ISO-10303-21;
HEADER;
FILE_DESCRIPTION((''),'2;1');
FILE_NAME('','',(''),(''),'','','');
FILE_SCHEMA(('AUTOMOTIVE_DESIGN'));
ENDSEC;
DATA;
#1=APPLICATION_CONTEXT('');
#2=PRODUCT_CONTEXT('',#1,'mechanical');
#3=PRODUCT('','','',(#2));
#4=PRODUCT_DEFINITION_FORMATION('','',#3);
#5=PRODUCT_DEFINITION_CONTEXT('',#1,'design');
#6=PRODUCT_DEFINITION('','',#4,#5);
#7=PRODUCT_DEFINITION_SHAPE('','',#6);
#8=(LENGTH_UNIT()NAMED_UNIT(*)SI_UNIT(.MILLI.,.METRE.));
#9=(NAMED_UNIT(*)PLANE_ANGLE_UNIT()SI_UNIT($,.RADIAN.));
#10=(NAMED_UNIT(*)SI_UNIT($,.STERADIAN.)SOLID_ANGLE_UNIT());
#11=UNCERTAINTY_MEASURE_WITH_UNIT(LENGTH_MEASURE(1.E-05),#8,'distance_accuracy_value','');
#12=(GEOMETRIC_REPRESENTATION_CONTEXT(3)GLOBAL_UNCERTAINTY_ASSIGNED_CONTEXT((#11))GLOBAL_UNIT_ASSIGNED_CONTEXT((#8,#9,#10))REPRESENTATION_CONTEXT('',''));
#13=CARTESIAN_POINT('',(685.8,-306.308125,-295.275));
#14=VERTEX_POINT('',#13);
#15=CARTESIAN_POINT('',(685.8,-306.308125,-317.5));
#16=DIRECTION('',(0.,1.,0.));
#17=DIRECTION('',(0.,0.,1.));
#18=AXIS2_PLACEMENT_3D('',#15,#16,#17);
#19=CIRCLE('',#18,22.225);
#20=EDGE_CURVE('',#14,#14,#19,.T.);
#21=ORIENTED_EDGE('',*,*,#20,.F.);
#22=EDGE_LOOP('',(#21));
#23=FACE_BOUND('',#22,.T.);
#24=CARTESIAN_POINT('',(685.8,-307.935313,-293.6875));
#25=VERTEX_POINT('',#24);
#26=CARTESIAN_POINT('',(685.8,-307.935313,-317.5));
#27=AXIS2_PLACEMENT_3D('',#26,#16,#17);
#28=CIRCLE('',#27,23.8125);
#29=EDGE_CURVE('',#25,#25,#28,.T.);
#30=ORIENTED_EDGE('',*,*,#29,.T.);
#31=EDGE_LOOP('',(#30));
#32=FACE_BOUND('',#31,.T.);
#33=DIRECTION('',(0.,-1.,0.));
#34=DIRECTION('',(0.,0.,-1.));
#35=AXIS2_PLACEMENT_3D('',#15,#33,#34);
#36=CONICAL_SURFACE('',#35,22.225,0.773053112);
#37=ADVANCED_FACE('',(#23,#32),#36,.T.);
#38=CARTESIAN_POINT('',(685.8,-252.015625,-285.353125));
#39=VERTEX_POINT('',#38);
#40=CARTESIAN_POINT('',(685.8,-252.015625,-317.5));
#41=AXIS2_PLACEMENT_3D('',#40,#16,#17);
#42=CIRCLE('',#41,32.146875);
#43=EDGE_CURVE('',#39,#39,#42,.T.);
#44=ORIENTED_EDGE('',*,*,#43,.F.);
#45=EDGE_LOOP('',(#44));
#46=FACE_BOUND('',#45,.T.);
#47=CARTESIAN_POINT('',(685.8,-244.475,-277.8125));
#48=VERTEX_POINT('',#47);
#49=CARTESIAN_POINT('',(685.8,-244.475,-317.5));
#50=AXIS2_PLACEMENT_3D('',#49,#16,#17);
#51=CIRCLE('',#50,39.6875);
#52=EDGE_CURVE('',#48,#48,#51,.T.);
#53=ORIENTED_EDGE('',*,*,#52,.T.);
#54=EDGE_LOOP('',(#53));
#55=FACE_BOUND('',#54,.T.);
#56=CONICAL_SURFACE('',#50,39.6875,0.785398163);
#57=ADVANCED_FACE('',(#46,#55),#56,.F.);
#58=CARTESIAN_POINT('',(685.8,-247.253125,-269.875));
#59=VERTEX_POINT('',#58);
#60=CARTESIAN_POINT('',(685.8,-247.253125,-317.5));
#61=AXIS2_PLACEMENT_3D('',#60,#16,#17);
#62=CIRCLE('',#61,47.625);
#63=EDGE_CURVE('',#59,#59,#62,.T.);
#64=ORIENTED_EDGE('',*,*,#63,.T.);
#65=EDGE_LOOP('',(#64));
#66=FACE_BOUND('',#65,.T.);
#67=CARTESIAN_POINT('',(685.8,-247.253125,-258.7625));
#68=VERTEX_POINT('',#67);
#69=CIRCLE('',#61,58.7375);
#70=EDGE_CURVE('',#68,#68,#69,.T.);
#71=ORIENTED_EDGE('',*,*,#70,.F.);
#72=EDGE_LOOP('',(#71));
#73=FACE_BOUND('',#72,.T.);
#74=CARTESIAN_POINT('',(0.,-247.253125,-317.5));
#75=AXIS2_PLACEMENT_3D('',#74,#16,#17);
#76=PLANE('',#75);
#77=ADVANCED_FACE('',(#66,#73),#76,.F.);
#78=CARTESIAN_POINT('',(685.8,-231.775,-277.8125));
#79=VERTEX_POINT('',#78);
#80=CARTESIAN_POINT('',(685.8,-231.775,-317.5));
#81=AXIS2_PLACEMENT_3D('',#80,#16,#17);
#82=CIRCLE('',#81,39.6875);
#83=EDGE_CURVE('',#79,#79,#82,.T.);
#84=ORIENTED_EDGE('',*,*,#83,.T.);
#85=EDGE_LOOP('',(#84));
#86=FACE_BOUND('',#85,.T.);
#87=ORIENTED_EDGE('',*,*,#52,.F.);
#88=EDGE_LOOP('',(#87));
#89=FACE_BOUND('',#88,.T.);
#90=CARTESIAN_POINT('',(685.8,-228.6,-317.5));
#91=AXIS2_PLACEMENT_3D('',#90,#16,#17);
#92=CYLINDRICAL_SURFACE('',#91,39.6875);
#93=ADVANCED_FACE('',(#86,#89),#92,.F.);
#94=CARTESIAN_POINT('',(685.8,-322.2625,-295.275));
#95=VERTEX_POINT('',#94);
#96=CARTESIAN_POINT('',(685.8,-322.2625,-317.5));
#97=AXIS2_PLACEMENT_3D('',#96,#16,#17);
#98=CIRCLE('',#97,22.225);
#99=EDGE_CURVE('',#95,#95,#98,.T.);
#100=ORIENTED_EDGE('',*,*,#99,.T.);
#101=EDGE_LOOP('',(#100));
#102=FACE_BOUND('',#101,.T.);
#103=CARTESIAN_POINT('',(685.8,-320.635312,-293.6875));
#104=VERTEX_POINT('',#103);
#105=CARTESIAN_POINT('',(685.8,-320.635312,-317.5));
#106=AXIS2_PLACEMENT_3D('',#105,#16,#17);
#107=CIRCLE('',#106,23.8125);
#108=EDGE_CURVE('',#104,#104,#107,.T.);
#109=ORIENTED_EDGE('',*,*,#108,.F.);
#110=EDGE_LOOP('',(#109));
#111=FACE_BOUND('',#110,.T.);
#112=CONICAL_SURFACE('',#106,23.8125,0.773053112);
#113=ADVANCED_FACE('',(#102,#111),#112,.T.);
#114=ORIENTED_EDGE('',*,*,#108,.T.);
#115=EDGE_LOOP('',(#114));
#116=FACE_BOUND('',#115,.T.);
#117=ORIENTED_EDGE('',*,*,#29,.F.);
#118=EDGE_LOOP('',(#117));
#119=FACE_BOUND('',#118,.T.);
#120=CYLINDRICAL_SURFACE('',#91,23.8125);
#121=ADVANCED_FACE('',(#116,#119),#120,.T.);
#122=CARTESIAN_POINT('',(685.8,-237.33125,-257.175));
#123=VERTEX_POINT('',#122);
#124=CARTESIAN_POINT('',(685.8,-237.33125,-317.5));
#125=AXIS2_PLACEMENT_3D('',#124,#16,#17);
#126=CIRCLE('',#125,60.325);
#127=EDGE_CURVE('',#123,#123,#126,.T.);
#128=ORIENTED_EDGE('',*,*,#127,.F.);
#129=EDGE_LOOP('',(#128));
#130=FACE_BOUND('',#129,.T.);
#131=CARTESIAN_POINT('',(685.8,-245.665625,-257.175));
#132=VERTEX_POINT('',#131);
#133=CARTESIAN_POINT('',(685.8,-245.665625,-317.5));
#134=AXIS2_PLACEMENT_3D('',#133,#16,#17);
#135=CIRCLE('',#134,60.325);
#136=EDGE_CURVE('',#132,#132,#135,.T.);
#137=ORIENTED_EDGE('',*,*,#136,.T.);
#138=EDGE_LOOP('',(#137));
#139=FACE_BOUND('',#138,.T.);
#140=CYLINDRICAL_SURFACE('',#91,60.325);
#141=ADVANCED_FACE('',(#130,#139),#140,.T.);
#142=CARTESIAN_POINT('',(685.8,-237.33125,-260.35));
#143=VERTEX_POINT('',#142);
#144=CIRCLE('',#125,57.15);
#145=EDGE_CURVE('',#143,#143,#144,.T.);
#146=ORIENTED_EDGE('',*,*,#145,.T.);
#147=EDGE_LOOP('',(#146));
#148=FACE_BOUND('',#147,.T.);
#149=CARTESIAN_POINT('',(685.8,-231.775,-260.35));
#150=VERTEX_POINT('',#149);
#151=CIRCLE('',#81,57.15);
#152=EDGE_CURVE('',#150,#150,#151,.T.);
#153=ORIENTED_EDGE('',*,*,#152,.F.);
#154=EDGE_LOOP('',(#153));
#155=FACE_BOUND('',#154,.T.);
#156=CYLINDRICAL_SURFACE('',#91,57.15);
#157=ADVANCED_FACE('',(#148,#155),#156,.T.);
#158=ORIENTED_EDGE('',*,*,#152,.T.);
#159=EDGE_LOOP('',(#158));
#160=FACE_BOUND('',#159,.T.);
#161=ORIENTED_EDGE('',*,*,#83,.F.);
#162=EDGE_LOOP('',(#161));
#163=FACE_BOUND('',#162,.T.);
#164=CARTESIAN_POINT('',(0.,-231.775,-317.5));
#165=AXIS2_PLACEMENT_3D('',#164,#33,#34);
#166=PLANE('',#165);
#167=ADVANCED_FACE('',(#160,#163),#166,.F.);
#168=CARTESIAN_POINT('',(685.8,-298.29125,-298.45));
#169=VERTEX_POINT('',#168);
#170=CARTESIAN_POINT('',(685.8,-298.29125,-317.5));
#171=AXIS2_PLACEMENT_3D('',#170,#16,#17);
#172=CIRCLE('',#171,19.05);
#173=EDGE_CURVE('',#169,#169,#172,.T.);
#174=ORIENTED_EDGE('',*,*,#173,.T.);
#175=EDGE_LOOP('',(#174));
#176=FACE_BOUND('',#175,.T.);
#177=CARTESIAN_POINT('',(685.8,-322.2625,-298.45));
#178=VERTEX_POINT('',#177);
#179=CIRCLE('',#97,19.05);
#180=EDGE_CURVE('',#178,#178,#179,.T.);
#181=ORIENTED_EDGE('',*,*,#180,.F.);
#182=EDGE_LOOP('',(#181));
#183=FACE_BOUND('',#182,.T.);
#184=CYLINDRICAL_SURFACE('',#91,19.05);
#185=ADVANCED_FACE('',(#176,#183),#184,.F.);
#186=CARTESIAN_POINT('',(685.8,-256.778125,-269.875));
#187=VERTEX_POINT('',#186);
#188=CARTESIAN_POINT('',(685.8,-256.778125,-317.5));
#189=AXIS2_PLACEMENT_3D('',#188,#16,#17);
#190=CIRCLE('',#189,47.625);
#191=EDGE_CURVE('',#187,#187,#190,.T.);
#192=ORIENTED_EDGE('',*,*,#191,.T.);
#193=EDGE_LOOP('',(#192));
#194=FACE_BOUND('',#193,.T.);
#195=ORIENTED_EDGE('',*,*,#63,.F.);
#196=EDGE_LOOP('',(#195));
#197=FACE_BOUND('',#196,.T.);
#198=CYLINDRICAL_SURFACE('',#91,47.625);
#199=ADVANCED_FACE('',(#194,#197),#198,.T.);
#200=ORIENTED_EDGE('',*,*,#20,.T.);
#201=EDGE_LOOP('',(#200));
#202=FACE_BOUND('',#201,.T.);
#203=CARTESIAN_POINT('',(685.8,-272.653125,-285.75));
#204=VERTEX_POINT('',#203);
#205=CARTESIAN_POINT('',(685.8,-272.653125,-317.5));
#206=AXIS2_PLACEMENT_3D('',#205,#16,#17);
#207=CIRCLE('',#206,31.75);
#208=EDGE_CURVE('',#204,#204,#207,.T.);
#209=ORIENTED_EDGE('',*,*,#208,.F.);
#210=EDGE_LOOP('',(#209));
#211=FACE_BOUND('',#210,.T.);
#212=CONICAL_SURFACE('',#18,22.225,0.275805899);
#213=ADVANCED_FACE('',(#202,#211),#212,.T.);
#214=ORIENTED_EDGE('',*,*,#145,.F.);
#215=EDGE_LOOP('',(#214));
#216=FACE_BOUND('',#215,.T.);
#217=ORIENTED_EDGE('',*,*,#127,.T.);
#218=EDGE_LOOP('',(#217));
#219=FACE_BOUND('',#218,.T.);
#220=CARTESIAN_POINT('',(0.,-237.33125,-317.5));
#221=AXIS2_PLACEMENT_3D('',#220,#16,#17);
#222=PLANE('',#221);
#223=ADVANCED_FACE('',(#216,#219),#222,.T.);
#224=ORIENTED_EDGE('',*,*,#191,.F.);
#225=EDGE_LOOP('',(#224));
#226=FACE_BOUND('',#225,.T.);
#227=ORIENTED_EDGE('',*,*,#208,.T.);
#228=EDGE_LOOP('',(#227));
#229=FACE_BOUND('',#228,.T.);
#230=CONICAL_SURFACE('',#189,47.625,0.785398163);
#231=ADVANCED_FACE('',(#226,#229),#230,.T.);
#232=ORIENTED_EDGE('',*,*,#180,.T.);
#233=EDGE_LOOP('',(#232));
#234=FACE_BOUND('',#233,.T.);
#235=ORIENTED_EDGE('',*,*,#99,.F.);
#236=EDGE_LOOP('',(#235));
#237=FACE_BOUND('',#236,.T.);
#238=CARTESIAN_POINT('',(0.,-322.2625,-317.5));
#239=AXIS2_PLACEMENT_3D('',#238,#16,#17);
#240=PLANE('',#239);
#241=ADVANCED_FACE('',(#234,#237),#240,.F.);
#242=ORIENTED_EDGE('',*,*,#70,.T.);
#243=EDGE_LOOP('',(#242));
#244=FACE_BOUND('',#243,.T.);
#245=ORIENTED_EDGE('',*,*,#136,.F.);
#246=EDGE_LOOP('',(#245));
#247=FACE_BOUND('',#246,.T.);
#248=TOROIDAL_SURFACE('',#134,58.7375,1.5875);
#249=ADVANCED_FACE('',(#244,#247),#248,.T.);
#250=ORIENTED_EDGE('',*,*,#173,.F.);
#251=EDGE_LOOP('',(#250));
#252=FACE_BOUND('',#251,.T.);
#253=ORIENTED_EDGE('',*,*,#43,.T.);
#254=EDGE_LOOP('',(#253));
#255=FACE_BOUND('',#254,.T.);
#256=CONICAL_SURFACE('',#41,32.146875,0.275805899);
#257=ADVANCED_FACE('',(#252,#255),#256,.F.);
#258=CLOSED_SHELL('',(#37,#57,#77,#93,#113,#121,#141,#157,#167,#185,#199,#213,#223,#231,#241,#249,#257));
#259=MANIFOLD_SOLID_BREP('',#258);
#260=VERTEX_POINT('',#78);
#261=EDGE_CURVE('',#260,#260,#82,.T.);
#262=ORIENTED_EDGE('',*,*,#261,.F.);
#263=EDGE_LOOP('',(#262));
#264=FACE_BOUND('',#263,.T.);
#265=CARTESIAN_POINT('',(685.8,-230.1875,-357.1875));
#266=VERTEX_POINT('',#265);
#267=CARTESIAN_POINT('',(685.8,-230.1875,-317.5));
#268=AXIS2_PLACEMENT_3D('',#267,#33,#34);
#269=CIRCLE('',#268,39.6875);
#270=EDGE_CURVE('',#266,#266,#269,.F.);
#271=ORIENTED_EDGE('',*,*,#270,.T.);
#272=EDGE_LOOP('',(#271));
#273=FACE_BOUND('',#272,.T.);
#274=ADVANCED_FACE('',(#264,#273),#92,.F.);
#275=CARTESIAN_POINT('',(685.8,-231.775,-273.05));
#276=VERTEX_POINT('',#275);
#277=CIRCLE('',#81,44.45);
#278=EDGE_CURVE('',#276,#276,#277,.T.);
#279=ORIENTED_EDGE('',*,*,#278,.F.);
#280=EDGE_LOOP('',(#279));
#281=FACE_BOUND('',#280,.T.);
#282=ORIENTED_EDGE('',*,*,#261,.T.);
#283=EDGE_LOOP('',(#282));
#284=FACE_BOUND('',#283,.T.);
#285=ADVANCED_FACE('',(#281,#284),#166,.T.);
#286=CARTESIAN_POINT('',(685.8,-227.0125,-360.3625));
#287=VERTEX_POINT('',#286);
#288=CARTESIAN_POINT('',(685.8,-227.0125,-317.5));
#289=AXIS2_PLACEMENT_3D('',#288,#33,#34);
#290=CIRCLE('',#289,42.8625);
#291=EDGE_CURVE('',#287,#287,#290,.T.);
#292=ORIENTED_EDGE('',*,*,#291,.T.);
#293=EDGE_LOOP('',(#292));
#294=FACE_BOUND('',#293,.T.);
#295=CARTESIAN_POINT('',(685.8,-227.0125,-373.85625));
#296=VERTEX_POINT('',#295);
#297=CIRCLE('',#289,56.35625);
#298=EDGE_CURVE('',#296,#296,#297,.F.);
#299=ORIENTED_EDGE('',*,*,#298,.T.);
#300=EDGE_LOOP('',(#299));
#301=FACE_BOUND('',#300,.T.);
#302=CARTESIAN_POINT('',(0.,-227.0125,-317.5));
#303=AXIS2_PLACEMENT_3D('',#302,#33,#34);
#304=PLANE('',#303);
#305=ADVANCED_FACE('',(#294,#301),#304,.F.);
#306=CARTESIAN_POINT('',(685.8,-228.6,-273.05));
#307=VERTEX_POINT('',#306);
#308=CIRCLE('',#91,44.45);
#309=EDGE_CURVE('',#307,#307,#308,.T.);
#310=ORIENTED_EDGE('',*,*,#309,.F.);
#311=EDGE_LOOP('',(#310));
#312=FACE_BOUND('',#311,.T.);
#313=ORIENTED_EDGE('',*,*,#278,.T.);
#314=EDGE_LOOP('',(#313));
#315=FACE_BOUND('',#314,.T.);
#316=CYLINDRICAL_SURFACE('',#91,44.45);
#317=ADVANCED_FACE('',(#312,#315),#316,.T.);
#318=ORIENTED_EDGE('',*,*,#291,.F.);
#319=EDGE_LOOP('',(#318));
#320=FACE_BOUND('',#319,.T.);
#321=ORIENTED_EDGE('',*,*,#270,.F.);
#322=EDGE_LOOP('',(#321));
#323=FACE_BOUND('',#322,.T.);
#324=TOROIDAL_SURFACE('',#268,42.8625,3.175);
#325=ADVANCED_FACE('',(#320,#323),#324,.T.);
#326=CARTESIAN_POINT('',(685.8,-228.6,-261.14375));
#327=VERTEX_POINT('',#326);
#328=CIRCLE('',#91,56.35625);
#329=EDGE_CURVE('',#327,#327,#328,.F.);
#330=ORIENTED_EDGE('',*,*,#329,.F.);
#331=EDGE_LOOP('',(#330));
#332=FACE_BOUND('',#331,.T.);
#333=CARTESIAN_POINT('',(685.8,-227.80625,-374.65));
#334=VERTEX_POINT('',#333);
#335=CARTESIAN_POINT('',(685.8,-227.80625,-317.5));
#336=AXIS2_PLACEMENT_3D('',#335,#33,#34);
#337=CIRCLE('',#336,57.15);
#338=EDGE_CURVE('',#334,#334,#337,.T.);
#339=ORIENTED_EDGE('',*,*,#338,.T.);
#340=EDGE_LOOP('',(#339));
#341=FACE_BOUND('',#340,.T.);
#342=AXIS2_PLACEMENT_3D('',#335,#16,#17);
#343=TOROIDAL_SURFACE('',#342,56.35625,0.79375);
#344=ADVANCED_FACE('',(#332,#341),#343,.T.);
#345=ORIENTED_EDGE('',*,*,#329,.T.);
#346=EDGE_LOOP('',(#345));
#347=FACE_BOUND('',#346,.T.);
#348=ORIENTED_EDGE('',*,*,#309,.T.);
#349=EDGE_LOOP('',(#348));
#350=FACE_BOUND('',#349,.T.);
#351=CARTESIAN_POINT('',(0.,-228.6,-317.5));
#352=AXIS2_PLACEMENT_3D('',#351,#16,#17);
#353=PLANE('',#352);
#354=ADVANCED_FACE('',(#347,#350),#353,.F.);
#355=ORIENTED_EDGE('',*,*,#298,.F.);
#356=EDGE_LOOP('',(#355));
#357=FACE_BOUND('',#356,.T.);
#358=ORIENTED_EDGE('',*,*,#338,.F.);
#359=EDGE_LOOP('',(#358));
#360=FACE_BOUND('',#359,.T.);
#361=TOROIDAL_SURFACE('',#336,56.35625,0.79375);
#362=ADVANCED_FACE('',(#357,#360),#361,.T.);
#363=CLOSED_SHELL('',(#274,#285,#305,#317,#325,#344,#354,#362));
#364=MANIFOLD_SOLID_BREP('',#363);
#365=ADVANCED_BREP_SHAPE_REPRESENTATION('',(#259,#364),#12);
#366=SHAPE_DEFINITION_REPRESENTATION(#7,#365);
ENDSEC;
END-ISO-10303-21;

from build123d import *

# Parameters (mm, degrees)
DRAINSKETCH_3_W = 4.7625
DRAINSKETCH_3_H = 3.175
DRAININFILLET_R = 3.175
RIMFILLET_R     = 0.79375


with BuildPart() as part:
    # DrainSketch → DrainUnderRevolve (revolve)
    with BuildSketch(Plane.XY.offset(-317.5), mode=Mode.PRIVATE) as drainunderrevolve_sk:
        Polygon((717.55, -272.653125), (712.106073113, -272.653125), (704.85, -298.29125), (704.85, -306.308125), (708.025, -306.308125), align=None)
        Polygon((733.425, -256.778125), (716.598997642, -256.778125), (712.106073113, -272.653125), (717.55, -272.653125), align=None)
        Polygon((733.425, -247.253125), (722.709375, -247.253125), (717.946875, -252.015625), (716.598997642, -256.778125), (733.425, -256.778125), align=None)
        with BuildLine():
            Line((746.125, -245.26875), (724.69375, -245.26875))
            Line((724.69375, -245.26875), (722.709375, -247.253125))
            Line((722.709375, -247.253125), (733.425, -247.253125))
            Line((733.425, -247.253125), (744.5375, -247.253125))
            ThreePointArc((744.5375, -247.253125), (745.660032015, -246.788157015), (746.125, -245.665625))
            Line((746.125, -245.665625), (746.125, -245.26875))
        make_face()
        Polygon((742.95, -237.33125), (725.4875, -237.33125), (725.4875, -244.475), (724.69375, -245.26875), (746.125, -245.26875), (746.125, -237.33125), align=None)
        Polygon((730.25, -231.775), (725.4875, -231.775), (725.4875, -237.33125), (742.95, -237.33125), (742.95, -231.775), align=None)
        Polygon((708.025, -306.308125), (704.85, -306.308125), (704.85, -322.2625), (708.025, -322.2625), (709.6125, -320.6353125), (709.6125, -307.9353125), align=None)
    revolve(drainunderrevolve_sk.sketch.rotate(Axis((685.8, -228.6, -317.5), (0, -1, 0)), 90), axis=Axis((685.8, -228.6, -317.5), (0, -1, 0)))


with BuildPart() as body_2:
    # DrainSketch<3> → DrainPlateRevolve (revolve)
    with BuildSketch(Plane.XY.offset(-317.5), mode=Mode.PRIVATE) as drainplaterevolve_sk:
        with Locations((727.86875, -230.1875)):
            Rectangle(DRAINSKETCH_3_W, DRAINSKETCH_3_H)
        Polygon((725.4875, -227.0125), (725.4875, -228.6), (730.25, -228.6), (742.95, -228.6), (742.95, -227.0125), align=None)
    revolve(drainplaterevolve_sk.sketch.rotate(Axis((685.8, -228.6, -317.5), (0, -1, 0)), 90), axis=Axis((685.8, -228.6, -317.5), (0, -1, 0)))

    # DrainInFillet
    draininfillet_edges = [body_2.edges().sort_by_distance(p)[0] for p in [
        (685.8, -227.0125, -357.1875),
    ]]
    fillet(draininfillet_edges, radius=DRAININFILLET_R)

    # RimFillet
    rimfillet_edges = [body_2.edges().sort_by_distance(p)[0] for p in [
        (685.8, -227.0125, -374.65),
        (685.8, -228.6, -374.65),
    ]]
    fillet(rimfillet_edges, radius=RIMFILLET_R - 0.0001)  # a hair under: the kernel refuses the full size


solid = Compound([part.part, body_2.part])
